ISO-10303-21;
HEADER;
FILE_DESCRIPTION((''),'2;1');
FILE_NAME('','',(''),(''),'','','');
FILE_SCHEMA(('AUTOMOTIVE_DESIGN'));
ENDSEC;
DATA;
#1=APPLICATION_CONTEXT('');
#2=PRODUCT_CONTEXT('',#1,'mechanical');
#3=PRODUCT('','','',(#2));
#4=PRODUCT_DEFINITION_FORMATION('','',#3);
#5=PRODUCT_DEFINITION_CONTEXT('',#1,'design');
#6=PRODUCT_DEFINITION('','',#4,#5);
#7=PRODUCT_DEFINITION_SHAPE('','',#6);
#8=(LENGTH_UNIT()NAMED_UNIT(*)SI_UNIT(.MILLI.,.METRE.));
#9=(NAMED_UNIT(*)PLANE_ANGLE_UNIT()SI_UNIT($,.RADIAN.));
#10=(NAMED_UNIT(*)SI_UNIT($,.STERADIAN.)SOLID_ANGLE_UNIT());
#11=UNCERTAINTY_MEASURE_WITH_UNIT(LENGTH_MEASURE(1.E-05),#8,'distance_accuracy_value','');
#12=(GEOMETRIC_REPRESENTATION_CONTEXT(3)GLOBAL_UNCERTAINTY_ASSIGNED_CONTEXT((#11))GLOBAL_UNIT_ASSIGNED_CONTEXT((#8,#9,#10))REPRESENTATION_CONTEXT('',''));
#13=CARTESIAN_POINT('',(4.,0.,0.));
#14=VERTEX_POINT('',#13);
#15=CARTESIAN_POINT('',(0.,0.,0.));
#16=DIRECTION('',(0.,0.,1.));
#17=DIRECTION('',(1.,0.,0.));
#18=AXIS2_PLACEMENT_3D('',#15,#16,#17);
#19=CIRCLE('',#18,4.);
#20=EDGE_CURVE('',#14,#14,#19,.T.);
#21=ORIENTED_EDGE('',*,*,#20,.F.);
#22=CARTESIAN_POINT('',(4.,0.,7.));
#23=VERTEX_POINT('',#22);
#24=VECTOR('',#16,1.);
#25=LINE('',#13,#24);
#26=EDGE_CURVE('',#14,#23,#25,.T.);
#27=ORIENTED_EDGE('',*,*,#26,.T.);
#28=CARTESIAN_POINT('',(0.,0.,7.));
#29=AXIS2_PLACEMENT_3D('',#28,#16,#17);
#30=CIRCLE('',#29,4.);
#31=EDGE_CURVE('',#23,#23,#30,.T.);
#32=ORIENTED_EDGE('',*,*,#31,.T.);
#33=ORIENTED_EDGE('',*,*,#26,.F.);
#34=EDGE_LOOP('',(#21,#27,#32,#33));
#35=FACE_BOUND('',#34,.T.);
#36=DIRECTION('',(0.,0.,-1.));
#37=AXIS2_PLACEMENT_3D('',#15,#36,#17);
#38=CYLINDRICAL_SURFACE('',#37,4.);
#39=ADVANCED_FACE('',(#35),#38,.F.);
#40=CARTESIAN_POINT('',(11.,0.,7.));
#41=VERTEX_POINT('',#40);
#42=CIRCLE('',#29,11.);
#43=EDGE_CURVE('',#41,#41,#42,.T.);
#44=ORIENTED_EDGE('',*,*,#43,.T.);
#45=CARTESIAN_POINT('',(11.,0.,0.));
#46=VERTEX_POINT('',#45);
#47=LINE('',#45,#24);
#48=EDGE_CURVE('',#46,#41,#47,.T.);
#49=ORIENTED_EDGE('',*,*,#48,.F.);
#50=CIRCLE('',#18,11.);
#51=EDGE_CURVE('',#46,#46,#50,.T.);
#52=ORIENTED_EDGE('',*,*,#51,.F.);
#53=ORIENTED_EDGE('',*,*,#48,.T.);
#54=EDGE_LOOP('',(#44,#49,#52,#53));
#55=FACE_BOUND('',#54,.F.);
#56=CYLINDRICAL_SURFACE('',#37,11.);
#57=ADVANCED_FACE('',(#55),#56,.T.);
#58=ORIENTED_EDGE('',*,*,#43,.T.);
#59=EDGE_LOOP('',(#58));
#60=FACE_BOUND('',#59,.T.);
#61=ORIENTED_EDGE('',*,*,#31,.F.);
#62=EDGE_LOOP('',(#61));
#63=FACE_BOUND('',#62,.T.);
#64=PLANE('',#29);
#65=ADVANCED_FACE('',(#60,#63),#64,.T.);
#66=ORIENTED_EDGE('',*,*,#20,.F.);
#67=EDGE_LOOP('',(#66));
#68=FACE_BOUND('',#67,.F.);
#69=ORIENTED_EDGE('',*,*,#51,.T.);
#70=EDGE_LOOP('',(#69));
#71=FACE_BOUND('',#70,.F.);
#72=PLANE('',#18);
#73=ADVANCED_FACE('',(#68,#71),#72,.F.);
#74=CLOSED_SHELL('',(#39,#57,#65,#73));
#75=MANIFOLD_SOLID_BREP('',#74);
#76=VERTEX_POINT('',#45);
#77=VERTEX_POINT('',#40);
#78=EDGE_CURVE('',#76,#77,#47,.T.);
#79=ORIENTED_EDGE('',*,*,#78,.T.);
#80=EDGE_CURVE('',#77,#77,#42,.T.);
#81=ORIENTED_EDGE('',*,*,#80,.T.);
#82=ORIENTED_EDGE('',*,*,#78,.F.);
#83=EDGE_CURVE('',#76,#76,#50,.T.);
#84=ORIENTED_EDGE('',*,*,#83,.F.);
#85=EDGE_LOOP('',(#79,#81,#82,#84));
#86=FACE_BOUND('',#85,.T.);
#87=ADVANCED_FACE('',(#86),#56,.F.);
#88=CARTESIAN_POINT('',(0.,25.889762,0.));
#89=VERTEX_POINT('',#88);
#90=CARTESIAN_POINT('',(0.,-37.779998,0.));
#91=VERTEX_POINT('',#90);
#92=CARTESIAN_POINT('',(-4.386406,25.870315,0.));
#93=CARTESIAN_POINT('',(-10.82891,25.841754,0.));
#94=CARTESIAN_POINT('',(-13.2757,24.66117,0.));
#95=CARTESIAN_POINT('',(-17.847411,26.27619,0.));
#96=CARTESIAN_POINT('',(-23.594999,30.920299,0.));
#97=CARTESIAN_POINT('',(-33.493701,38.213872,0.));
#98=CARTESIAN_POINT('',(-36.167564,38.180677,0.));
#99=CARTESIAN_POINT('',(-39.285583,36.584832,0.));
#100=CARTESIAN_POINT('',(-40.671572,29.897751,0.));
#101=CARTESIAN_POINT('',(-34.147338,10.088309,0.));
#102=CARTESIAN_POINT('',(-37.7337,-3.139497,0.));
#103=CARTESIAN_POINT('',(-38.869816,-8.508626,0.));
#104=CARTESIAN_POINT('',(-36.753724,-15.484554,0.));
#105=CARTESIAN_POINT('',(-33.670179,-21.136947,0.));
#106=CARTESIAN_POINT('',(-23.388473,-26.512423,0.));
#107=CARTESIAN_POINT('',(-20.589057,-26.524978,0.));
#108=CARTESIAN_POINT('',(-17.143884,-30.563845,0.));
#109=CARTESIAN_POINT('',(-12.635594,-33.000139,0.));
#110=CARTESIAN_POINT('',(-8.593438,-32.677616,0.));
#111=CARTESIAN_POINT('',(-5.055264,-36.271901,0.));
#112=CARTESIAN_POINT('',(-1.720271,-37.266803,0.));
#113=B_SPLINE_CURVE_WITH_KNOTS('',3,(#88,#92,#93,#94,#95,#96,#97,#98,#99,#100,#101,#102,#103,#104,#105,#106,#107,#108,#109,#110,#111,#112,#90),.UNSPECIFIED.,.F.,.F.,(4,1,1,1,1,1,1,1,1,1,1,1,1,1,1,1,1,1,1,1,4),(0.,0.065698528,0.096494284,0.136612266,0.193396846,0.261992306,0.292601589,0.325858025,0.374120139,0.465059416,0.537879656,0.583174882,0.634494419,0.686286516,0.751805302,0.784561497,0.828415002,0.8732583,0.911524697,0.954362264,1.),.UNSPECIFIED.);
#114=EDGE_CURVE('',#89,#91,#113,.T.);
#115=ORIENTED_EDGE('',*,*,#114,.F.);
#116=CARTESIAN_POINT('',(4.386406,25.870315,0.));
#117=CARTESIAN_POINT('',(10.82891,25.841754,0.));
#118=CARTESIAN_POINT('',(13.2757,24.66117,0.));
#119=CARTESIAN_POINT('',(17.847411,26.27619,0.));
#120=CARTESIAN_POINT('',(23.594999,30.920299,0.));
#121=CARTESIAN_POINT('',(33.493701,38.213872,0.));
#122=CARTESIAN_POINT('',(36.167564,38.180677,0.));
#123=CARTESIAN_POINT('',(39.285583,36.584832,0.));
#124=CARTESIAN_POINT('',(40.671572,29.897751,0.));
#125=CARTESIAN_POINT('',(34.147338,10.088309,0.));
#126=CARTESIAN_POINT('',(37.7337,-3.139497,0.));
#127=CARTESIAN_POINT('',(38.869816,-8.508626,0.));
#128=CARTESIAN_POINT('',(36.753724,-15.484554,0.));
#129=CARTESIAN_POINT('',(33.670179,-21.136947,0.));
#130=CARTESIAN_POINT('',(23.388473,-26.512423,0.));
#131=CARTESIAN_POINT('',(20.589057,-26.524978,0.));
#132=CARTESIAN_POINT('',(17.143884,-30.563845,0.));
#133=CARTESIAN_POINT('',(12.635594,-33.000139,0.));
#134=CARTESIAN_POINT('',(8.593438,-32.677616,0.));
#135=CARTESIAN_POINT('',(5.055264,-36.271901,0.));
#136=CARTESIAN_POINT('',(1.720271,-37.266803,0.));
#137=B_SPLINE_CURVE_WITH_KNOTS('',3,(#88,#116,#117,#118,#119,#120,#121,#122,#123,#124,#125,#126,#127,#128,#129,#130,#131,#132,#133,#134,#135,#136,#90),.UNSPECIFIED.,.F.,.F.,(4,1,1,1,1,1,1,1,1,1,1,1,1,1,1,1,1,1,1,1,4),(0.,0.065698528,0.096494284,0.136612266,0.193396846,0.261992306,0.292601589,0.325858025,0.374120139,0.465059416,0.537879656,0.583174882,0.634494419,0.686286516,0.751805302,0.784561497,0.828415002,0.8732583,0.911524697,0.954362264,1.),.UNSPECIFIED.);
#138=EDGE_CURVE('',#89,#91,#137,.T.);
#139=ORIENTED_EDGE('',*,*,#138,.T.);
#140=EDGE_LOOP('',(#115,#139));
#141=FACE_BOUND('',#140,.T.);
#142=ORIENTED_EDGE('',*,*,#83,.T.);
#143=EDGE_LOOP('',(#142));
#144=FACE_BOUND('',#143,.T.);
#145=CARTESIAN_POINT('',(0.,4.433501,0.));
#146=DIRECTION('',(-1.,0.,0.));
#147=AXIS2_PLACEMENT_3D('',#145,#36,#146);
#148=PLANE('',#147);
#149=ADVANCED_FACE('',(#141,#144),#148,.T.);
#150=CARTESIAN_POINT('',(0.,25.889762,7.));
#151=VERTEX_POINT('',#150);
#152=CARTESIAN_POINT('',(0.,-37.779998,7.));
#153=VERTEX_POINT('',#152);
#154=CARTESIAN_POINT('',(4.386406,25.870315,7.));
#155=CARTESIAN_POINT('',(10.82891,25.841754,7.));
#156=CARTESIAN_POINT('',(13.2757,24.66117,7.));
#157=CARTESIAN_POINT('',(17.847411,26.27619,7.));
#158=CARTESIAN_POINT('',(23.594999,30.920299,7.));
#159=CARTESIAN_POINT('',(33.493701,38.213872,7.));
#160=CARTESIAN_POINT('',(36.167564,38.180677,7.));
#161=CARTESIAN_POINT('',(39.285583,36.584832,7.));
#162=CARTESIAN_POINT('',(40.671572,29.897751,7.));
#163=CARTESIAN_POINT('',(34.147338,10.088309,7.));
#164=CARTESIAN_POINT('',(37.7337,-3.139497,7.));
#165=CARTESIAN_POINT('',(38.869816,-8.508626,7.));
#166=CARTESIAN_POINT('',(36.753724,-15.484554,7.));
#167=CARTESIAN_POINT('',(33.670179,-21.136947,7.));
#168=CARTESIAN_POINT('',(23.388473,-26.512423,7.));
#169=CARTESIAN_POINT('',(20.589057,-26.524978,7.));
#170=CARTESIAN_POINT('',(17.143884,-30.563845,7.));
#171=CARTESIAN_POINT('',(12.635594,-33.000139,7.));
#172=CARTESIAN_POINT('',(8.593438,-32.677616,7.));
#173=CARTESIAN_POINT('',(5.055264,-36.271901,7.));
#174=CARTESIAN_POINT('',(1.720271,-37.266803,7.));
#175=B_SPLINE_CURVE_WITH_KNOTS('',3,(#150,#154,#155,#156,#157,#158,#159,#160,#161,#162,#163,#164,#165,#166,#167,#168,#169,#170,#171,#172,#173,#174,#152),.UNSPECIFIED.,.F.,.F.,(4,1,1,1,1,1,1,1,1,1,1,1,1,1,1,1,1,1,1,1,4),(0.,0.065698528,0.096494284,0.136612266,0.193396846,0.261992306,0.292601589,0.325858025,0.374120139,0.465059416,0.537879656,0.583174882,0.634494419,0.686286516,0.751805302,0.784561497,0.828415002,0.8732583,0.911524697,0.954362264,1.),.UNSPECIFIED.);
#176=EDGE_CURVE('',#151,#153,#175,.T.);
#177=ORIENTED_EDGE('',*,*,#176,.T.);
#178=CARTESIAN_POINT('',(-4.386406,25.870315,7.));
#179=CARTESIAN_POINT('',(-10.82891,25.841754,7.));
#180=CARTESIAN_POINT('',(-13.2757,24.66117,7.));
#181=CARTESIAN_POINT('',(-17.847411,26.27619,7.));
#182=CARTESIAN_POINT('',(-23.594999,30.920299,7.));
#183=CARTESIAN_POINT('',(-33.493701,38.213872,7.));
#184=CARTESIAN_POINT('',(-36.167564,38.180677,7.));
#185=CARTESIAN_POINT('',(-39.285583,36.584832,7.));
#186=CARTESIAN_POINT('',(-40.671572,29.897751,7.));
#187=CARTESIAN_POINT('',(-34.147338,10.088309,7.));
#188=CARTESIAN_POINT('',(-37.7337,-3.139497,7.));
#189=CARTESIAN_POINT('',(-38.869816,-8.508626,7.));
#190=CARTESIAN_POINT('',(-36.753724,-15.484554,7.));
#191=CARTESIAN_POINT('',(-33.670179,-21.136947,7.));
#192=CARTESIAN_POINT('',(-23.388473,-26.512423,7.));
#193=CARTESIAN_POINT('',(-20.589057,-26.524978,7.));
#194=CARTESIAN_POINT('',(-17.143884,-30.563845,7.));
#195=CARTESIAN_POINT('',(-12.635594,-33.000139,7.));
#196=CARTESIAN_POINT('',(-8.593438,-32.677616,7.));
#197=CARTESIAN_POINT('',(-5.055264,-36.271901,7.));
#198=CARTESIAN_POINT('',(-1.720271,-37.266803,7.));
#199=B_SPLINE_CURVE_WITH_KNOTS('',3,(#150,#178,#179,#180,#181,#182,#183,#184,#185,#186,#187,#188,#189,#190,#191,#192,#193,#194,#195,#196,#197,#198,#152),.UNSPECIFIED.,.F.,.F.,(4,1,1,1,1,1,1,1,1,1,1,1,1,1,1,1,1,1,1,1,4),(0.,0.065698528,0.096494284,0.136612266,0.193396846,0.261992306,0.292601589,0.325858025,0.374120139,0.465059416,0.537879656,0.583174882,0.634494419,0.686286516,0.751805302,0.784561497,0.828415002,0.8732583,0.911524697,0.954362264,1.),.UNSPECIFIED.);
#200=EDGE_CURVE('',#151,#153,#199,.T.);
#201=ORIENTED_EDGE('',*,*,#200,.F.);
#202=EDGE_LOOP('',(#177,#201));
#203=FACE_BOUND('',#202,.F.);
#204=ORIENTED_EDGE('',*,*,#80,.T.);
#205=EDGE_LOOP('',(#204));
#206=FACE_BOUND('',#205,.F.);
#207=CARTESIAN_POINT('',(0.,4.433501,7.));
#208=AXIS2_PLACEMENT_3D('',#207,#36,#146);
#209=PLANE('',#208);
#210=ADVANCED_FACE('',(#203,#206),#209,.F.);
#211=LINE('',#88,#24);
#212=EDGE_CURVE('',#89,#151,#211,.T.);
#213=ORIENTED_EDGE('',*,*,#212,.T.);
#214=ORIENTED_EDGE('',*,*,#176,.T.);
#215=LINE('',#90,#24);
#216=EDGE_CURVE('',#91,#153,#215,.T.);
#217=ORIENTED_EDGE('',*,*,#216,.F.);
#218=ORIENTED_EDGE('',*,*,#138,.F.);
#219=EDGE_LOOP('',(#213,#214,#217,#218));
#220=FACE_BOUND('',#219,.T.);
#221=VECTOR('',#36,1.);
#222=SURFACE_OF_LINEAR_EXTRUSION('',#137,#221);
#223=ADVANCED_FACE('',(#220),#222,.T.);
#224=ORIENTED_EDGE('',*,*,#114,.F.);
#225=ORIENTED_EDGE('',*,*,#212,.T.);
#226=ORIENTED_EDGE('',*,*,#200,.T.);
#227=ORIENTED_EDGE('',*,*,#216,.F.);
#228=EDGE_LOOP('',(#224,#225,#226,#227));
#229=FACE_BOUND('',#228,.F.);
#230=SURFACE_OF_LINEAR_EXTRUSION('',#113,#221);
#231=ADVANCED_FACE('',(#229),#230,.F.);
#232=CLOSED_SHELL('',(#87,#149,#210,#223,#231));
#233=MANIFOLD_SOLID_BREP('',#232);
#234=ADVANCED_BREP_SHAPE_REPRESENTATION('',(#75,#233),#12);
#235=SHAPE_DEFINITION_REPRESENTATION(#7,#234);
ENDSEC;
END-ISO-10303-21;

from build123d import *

# Parameters (mm, degrees)
F1_R     = 11
F1_R_2   = 4
F2_DEPTH = 7
F3_R     = 11
F4_DEPTH = 7


with BuildPart() as f2:
    # F1 (on Top) → F2 (new body)
    with BuildSketch(Plane.XY):
        Circle(F1_R)
        Circle(F1_R_2, mode=Mode.SUBTRACT)
    extrude(amount=F2_DEPTH)


with BuildPart() as f4:
    # F3 (on Top) → F4 (new body, through all)
    with BuildSketch(Plane.XY):
        with BuildLine():
            add(Edge.make_bspline(
                [(0, 25.8897617459), (4.3864055569, 25.8703153674), (10.8289101146, 25.8417536259), (13.2757002483, 24.6611704296), (17.8474108812, 26.2761901904), (23.594998976, 30.9202992901), (33.4937013261, 38.2138715063), (36.1675639167, 38.1806773323), (39.2855825143, 36.5848315949), (40.6715724711, 29.8977509674), (34.1473376422, 10.0883092219), (37.7336996012, -3.1394968098), (38.8698157184, -8.5086259705), (36.7537244866, -15.4845539707), (33.6701790157, -21.1369466388), (23.38847337, -26.5124231681), (20.5890565286, -26.5249775413), (17.1438835411, -30.5638448818), (12.6355944839, -33.0001390733), (8.5934381149, -32.6776161387), (5.0552641204, -36.2719007466), (1.7202712663, -37.2668030025), (0, -37.7799980342)],
                knots=[0, 0, 0, 0, 0.0656985275, 0.0964942838, 0.1366122657, 0.1933968461, 0.2619923062, 0.2926015893, 0.3258580246, 0.3741201394, 0.4650594165, 0.5378796558, 0.5831748819, 0.6344944194, 0.6862865162, 0.751805302, 0.784561497, 0.8284150022, 0.8732582997, 0.9115246968, 0.9543622644, 1, 1, 1, 1], degree=3))
            add(Edge.make_bspline(
                [(0, 25.8897617459), (-4.3864055569, 25.8703153674), (-10.8289101146, 25.8417536259), (-13.2757002483, 24.6611704296), (-17.8474108812, 26.2761901904), (-23.594998976, 30.9202992901), (-33.4937013261, 38.2138715063), (-36.1675639167, 38.1806773323), (-39.2855825143, 36.5848315949), (-40.6715724711, 29.8977509674), (-34.1473376422, 10.0883092219), (-37.7336996012, -3.1394968098), (-38.8698157184, -8.5086259705), (-36.7537244866, -15.4845539707), (-33.6701790157, -21.1369466388), (-23.38847337, -26.5124231681), (-20.5890565286, -26.5249775413), (-17.1438835411, -30.5638448818), (-12.6355944839, -33.0001390733), (-8.5934381149, -32.6776161387), (-5.0552641204, -36.2719007466), (-1.7202712663, -37.2668030025), (0, -37.7799980342)],
                knots=[0, 0, 0, 0, 0.0656985275, 0.0964942838, 0.1366122657, 0.1933968461, 0.2619923062, 0.2926015893, 0.3258580246, 0.3741201394, 0.4650594165, 0.5378796558, 0.5831748819, 0.6344944194, 0.6862865162, 0.751805302, 0.784561497, 0.8284150022, 0.8732582997, 0.9115246968, 0.9543622644, 1, 1, 1, 1], degree=3))
        make_face()
        Circle(F3_R, mode=Mode.SUBTRACT)
    extrude(amount=F4_DEPTH)


solid = Compound([f2.part, f4.part])
